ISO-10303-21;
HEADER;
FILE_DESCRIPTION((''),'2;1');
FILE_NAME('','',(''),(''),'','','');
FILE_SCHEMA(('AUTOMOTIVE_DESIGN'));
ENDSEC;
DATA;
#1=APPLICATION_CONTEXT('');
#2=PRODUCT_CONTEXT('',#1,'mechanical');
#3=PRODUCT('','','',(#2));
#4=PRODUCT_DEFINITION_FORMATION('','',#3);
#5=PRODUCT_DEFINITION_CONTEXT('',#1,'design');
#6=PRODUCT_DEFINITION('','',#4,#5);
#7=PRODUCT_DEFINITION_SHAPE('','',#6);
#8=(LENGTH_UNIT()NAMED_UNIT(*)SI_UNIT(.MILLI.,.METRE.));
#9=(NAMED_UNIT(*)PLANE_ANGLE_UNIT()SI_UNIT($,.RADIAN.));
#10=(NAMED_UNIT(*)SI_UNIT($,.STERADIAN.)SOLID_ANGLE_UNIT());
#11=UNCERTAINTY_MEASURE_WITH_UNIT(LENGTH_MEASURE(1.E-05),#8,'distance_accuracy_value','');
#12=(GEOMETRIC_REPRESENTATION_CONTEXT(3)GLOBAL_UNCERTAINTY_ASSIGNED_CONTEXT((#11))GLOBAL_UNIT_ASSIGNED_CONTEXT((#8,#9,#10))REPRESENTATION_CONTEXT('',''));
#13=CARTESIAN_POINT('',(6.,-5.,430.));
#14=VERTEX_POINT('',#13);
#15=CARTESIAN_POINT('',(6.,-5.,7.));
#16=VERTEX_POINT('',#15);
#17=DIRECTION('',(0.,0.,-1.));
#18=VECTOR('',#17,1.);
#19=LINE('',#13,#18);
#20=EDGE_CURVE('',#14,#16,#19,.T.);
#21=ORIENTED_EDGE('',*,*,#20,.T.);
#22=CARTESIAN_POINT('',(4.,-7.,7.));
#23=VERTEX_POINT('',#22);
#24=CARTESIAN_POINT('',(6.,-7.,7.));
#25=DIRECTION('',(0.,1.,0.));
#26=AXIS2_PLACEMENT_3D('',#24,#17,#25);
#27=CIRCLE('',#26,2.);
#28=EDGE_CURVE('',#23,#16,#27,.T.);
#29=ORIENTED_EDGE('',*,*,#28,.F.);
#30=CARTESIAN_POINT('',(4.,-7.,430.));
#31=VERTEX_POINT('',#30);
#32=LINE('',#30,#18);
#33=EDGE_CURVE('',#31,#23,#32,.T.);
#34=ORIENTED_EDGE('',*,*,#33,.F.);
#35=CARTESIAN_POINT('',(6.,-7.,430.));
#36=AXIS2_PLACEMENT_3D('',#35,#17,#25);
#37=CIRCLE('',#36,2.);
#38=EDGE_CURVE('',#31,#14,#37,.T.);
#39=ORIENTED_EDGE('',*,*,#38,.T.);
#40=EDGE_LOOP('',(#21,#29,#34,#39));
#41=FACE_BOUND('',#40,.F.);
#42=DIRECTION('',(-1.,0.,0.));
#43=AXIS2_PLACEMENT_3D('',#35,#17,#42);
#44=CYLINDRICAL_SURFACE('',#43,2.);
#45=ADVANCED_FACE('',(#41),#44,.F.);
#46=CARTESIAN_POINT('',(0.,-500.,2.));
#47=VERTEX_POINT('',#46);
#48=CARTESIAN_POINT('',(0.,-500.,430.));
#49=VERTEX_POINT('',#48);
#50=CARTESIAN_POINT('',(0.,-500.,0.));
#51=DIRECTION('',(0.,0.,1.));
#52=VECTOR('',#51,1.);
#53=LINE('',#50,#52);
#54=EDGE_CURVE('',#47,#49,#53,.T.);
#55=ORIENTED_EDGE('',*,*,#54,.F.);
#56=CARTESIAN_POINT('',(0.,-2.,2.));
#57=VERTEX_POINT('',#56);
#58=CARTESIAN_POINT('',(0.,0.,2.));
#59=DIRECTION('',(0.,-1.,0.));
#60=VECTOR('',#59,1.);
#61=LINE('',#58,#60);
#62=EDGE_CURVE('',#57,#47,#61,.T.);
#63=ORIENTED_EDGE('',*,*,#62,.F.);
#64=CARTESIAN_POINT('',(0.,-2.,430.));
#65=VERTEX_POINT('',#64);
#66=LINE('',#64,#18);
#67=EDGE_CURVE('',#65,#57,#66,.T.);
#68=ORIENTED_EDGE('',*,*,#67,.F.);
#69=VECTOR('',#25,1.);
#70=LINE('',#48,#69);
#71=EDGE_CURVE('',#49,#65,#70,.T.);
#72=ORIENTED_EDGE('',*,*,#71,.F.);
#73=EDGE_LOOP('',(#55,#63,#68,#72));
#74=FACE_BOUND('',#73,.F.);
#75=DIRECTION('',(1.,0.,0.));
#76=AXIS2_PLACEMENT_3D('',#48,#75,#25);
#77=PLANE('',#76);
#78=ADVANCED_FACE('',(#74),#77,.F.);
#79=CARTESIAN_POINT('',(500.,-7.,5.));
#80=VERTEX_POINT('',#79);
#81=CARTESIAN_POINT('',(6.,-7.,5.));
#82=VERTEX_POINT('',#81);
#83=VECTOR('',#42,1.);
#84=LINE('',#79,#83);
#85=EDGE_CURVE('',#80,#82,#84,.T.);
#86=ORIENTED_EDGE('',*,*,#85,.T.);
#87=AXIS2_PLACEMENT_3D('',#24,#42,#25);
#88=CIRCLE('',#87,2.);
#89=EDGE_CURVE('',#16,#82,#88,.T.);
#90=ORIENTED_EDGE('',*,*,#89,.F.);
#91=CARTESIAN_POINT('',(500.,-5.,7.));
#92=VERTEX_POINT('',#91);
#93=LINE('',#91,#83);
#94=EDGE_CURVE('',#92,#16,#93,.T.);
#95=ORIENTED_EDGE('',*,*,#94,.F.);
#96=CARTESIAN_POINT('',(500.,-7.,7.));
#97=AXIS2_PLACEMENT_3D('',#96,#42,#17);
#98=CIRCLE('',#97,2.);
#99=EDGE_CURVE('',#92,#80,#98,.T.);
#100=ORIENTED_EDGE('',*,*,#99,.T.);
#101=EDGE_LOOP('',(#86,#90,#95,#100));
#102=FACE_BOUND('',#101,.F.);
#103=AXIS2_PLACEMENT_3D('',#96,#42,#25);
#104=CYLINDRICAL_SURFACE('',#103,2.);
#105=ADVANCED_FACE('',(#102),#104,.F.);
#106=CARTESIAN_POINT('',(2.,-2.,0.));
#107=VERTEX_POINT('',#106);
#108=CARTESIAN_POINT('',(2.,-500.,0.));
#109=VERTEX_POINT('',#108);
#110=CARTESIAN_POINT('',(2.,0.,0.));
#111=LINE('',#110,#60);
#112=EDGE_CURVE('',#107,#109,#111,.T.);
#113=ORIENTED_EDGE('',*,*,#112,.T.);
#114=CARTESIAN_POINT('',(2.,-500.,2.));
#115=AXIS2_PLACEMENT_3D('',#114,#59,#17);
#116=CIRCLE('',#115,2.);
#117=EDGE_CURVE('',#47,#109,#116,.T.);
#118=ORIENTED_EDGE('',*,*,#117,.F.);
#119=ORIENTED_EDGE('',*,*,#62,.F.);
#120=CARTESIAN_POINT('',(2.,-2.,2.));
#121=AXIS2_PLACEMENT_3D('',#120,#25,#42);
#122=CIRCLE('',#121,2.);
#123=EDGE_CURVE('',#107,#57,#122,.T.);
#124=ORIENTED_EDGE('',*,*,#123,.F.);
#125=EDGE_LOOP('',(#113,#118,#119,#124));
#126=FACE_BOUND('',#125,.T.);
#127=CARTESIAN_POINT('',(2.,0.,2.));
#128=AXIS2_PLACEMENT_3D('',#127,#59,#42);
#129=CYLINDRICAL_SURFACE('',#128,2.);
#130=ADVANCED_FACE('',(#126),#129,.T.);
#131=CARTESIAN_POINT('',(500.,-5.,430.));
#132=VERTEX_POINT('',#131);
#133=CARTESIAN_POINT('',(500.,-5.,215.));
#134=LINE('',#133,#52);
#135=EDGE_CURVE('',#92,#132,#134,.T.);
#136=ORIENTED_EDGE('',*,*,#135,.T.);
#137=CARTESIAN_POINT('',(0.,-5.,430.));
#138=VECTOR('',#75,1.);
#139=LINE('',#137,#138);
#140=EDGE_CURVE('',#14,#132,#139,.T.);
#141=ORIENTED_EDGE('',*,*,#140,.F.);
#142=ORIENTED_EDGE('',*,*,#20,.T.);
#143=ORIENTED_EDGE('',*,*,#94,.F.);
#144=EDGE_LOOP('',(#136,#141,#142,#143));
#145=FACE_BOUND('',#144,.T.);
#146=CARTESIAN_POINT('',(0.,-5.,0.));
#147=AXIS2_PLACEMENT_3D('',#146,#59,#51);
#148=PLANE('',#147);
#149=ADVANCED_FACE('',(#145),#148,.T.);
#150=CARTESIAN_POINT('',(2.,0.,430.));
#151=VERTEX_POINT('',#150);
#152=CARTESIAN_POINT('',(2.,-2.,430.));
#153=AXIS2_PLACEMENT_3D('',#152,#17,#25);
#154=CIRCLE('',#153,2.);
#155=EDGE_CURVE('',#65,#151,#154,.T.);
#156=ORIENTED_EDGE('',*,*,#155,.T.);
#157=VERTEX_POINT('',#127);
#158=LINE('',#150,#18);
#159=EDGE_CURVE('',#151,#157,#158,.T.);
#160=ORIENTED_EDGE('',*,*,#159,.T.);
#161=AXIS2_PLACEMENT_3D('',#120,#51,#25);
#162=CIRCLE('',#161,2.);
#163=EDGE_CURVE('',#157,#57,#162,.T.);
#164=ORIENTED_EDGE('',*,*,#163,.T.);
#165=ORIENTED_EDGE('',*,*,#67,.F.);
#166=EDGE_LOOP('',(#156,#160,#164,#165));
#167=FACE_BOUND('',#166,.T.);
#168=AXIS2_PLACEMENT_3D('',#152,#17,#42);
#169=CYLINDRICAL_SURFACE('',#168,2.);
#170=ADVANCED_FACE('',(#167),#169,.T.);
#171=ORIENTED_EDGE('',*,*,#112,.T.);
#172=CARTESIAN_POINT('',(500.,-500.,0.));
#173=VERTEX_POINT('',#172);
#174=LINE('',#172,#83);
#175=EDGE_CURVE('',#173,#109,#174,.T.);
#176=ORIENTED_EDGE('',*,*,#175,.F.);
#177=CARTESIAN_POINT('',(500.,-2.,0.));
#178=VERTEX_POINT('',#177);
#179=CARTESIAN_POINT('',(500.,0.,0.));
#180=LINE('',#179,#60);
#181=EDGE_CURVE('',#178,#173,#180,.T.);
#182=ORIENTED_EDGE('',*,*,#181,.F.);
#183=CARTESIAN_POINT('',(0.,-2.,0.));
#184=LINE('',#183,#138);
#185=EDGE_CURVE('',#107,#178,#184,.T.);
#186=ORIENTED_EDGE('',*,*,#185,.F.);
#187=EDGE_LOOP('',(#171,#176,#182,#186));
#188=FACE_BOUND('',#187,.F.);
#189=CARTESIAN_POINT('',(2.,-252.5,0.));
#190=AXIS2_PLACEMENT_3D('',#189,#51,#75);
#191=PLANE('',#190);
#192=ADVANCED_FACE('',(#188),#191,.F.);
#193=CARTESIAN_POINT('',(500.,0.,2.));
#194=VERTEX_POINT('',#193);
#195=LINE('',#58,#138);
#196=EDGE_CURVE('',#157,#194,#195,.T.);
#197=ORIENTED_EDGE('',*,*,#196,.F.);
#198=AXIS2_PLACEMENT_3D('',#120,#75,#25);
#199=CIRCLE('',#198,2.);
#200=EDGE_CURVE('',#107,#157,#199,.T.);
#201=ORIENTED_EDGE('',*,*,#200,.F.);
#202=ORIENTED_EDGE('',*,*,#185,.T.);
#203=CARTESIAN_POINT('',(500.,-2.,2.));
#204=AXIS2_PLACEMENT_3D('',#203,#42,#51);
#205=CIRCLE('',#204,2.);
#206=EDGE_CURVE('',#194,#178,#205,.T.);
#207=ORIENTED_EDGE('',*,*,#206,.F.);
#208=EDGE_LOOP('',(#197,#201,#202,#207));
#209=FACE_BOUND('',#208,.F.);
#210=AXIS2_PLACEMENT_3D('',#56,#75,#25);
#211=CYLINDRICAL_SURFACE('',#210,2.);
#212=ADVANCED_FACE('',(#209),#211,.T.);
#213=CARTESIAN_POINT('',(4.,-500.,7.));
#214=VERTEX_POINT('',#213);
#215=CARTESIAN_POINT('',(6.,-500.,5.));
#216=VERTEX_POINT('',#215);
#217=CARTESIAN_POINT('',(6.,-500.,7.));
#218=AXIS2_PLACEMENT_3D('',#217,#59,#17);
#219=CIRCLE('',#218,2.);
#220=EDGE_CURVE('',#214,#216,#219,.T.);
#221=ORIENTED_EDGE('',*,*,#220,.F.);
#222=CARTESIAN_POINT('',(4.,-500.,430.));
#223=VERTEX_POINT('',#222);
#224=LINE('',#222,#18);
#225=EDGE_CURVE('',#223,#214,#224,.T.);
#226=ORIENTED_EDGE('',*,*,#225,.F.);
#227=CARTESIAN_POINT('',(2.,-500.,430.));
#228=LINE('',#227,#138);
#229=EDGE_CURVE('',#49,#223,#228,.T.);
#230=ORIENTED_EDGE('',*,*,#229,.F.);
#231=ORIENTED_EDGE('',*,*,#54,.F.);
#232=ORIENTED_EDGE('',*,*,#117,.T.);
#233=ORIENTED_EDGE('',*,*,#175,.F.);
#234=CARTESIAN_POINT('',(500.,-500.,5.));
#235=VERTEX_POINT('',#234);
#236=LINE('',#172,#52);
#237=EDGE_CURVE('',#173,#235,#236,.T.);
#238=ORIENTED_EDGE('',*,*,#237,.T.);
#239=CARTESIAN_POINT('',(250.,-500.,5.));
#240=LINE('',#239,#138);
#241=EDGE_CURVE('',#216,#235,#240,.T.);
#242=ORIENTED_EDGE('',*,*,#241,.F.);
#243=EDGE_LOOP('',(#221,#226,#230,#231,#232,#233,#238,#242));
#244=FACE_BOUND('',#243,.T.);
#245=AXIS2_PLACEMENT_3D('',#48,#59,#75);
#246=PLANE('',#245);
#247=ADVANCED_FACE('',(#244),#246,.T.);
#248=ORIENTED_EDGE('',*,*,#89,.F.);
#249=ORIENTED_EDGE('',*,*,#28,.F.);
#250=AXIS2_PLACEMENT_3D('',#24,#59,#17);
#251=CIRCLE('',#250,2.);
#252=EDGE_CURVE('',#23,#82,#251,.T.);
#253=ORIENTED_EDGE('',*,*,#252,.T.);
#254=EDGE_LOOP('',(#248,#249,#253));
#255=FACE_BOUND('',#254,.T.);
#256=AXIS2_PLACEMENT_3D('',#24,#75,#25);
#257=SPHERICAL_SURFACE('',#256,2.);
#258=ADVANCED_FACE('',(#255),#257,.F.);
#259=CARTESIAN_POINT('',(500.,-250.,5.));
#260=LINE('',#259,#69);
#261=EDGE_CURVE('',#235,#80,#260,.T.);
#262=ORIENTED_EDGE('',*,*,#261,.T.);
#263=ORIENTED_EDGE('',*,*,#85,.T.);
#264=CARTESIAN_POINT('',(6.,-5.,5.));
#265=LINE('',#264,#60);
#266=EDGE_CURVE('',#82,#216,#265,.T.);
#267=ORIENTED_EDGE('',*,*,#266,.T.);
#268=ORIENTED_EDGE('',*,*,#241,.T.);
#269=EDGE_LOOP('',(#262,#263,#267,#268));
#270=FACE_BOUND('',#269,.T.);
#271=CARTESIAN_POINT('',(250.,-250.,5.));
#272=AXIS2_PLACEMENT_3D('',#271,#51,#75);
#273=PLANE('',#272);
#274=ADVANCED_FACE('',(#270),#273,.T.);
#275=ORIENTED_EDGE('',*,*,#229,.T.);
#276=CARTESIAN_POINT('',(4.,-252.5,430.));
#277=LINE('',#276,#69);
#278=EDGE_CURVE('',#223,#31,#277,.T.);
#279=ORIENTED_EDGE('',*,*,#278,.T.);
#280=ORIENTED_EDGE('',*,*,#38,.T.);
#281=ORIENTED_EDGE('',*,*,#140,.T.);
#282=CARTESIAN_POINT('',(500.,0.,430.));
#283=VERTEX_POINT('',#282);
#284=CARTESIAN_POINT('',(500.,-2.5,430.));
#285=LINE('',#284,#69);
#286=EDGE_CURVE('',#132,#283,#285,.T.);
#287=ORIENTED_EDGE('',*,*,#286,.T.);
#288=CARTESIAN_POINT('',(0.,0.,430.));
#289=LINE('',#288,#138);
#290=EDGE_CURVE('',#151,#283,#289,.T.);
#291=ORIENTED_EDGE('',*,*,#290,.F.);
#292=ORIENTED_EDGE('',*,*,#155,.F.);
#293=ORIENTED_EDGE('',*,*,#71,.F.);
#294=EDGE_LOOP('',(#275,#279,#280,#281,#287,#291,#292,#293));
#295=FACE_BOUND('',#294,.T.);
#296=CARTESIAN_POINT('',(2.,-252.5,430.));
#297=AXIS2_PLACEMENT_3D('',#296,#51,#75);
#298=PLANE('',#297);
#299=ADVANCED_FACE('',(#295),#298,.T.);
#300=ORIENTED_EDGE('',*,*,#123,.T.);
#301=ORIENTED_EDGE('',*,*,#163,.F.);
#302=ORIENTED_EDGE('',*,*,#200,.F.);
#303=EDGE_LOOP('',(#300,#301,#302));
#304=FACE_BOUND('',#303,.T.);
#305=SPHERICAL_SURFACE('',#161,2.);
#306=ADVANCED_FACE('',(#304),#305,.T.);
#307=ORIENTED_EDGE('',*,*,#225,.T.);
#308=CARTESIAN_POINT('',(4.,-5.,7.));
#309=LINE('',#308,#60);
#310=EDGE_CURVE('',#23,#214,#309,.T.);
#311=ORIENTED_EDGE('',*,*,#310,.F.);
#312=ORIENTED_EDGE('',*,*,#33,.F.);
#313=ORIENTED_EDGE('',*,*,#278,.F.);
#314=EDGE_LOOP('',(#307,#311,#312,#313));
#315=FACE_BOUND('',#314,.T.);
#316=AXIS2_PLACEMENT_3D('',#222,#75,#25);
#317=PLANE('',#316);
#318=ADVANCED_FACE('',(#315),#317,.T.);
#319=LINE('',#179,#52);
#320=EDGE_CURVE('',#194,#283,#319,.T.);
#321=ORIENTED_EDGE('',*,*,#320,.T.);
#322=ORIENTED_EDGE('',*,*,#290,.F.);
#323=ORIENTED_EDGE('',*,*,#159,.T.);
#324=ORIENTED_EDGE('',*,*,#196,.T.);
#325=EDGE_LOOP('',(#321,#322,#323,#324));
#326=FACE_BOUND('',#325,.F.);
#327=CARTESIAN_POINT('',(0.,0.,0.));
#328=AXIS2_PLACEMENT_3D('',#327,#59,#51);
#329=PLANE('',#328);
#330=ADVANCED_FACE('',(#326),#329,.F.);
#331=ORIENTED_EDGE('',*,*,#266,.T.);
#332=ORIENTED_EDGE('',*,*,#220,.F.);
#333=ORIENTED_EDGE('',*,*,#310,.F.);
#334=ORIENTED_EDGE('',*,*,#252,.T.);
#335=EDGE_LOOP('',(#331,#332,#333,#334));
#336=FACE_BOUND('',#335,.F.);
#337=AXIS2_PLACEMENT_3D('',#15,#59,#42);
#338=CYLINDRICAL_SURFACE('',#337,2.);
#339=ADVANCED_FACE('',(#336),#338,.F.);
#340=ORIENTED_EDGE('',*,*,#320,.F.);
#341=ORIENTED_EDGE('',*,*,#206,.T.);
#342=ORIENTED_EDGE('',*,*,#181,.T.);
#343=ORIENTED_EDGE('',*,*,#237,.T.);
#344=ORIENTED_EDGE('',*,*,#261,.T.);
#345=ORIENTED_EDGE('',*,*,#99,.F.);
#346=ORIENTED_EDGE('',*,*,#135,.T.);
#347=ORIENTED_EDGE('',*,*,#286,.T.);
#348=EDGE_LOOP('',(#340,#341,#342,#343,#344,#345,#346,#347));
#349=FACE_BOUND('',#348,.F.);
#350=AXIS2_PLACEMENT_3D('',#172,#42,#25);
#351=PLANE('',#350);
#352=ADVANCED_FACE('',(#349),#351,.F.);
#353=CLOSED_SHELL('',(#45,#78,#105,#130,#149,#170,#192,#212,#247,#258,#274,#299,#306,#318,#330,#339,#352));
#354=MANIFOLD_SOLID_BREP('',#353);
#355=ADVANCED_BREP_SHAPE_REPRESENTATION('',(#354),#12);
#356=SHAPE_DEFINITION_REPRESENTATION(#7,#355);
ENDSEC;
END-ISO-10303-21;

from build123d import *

# Parameters (mm, degrees)
F0_W     = 5
F0_H     = 430
F1_DEPTH = 500
F2_W     = 500
F2_H     = 500
F3_DEPTH = 5
F4_W     = 4
F4_H     = 495
F5_DEPTH = 430
F7_R     = 2


# Not quite as in the source:
# - a feature names something its author has since deleted; it is built from what else it names


with BuildPart() as f1:
    # F0 (on Right) → F1 (new body)
    with BuildSketch(Plane.YZ):
        with Locations((-2.5, 215)):
            Rectangle(F0_W, F0_H)
    extrude(amount=F1_DEPTH)

    # F2 (on Top) → F3 (join)
    with BuildSketch(Plane.XY):
        with Locations((250, -250)):
            Rectangle(F2_W, F2_H)
    extrude(amount=F3_DEPTH)


with BuildPart() as f5:
    # F4 (on face) → F5 (new body, through all)
    with BuildSketch(Plane.XY.offset(430)):
        with Locations((2, -252.5)):
            Rectangle(F4_W, F4_H)
    extrude(amount=-F5_DEPTH)

    # F6: union F1
    add(f1.part)

    # F7
    f7_edges = [f5.edges().sort_by_distance(p)[0] for p in [
        (0, 0, 215),
        (250, 0, 0),
        (0, -250, 0),
        (252, -5, 5),
        (4, -5, 217.5),
        (4, -252.5, 5),
    ]]
    fillet(f7_edges, radius=F7_R)


solid = f5.part
